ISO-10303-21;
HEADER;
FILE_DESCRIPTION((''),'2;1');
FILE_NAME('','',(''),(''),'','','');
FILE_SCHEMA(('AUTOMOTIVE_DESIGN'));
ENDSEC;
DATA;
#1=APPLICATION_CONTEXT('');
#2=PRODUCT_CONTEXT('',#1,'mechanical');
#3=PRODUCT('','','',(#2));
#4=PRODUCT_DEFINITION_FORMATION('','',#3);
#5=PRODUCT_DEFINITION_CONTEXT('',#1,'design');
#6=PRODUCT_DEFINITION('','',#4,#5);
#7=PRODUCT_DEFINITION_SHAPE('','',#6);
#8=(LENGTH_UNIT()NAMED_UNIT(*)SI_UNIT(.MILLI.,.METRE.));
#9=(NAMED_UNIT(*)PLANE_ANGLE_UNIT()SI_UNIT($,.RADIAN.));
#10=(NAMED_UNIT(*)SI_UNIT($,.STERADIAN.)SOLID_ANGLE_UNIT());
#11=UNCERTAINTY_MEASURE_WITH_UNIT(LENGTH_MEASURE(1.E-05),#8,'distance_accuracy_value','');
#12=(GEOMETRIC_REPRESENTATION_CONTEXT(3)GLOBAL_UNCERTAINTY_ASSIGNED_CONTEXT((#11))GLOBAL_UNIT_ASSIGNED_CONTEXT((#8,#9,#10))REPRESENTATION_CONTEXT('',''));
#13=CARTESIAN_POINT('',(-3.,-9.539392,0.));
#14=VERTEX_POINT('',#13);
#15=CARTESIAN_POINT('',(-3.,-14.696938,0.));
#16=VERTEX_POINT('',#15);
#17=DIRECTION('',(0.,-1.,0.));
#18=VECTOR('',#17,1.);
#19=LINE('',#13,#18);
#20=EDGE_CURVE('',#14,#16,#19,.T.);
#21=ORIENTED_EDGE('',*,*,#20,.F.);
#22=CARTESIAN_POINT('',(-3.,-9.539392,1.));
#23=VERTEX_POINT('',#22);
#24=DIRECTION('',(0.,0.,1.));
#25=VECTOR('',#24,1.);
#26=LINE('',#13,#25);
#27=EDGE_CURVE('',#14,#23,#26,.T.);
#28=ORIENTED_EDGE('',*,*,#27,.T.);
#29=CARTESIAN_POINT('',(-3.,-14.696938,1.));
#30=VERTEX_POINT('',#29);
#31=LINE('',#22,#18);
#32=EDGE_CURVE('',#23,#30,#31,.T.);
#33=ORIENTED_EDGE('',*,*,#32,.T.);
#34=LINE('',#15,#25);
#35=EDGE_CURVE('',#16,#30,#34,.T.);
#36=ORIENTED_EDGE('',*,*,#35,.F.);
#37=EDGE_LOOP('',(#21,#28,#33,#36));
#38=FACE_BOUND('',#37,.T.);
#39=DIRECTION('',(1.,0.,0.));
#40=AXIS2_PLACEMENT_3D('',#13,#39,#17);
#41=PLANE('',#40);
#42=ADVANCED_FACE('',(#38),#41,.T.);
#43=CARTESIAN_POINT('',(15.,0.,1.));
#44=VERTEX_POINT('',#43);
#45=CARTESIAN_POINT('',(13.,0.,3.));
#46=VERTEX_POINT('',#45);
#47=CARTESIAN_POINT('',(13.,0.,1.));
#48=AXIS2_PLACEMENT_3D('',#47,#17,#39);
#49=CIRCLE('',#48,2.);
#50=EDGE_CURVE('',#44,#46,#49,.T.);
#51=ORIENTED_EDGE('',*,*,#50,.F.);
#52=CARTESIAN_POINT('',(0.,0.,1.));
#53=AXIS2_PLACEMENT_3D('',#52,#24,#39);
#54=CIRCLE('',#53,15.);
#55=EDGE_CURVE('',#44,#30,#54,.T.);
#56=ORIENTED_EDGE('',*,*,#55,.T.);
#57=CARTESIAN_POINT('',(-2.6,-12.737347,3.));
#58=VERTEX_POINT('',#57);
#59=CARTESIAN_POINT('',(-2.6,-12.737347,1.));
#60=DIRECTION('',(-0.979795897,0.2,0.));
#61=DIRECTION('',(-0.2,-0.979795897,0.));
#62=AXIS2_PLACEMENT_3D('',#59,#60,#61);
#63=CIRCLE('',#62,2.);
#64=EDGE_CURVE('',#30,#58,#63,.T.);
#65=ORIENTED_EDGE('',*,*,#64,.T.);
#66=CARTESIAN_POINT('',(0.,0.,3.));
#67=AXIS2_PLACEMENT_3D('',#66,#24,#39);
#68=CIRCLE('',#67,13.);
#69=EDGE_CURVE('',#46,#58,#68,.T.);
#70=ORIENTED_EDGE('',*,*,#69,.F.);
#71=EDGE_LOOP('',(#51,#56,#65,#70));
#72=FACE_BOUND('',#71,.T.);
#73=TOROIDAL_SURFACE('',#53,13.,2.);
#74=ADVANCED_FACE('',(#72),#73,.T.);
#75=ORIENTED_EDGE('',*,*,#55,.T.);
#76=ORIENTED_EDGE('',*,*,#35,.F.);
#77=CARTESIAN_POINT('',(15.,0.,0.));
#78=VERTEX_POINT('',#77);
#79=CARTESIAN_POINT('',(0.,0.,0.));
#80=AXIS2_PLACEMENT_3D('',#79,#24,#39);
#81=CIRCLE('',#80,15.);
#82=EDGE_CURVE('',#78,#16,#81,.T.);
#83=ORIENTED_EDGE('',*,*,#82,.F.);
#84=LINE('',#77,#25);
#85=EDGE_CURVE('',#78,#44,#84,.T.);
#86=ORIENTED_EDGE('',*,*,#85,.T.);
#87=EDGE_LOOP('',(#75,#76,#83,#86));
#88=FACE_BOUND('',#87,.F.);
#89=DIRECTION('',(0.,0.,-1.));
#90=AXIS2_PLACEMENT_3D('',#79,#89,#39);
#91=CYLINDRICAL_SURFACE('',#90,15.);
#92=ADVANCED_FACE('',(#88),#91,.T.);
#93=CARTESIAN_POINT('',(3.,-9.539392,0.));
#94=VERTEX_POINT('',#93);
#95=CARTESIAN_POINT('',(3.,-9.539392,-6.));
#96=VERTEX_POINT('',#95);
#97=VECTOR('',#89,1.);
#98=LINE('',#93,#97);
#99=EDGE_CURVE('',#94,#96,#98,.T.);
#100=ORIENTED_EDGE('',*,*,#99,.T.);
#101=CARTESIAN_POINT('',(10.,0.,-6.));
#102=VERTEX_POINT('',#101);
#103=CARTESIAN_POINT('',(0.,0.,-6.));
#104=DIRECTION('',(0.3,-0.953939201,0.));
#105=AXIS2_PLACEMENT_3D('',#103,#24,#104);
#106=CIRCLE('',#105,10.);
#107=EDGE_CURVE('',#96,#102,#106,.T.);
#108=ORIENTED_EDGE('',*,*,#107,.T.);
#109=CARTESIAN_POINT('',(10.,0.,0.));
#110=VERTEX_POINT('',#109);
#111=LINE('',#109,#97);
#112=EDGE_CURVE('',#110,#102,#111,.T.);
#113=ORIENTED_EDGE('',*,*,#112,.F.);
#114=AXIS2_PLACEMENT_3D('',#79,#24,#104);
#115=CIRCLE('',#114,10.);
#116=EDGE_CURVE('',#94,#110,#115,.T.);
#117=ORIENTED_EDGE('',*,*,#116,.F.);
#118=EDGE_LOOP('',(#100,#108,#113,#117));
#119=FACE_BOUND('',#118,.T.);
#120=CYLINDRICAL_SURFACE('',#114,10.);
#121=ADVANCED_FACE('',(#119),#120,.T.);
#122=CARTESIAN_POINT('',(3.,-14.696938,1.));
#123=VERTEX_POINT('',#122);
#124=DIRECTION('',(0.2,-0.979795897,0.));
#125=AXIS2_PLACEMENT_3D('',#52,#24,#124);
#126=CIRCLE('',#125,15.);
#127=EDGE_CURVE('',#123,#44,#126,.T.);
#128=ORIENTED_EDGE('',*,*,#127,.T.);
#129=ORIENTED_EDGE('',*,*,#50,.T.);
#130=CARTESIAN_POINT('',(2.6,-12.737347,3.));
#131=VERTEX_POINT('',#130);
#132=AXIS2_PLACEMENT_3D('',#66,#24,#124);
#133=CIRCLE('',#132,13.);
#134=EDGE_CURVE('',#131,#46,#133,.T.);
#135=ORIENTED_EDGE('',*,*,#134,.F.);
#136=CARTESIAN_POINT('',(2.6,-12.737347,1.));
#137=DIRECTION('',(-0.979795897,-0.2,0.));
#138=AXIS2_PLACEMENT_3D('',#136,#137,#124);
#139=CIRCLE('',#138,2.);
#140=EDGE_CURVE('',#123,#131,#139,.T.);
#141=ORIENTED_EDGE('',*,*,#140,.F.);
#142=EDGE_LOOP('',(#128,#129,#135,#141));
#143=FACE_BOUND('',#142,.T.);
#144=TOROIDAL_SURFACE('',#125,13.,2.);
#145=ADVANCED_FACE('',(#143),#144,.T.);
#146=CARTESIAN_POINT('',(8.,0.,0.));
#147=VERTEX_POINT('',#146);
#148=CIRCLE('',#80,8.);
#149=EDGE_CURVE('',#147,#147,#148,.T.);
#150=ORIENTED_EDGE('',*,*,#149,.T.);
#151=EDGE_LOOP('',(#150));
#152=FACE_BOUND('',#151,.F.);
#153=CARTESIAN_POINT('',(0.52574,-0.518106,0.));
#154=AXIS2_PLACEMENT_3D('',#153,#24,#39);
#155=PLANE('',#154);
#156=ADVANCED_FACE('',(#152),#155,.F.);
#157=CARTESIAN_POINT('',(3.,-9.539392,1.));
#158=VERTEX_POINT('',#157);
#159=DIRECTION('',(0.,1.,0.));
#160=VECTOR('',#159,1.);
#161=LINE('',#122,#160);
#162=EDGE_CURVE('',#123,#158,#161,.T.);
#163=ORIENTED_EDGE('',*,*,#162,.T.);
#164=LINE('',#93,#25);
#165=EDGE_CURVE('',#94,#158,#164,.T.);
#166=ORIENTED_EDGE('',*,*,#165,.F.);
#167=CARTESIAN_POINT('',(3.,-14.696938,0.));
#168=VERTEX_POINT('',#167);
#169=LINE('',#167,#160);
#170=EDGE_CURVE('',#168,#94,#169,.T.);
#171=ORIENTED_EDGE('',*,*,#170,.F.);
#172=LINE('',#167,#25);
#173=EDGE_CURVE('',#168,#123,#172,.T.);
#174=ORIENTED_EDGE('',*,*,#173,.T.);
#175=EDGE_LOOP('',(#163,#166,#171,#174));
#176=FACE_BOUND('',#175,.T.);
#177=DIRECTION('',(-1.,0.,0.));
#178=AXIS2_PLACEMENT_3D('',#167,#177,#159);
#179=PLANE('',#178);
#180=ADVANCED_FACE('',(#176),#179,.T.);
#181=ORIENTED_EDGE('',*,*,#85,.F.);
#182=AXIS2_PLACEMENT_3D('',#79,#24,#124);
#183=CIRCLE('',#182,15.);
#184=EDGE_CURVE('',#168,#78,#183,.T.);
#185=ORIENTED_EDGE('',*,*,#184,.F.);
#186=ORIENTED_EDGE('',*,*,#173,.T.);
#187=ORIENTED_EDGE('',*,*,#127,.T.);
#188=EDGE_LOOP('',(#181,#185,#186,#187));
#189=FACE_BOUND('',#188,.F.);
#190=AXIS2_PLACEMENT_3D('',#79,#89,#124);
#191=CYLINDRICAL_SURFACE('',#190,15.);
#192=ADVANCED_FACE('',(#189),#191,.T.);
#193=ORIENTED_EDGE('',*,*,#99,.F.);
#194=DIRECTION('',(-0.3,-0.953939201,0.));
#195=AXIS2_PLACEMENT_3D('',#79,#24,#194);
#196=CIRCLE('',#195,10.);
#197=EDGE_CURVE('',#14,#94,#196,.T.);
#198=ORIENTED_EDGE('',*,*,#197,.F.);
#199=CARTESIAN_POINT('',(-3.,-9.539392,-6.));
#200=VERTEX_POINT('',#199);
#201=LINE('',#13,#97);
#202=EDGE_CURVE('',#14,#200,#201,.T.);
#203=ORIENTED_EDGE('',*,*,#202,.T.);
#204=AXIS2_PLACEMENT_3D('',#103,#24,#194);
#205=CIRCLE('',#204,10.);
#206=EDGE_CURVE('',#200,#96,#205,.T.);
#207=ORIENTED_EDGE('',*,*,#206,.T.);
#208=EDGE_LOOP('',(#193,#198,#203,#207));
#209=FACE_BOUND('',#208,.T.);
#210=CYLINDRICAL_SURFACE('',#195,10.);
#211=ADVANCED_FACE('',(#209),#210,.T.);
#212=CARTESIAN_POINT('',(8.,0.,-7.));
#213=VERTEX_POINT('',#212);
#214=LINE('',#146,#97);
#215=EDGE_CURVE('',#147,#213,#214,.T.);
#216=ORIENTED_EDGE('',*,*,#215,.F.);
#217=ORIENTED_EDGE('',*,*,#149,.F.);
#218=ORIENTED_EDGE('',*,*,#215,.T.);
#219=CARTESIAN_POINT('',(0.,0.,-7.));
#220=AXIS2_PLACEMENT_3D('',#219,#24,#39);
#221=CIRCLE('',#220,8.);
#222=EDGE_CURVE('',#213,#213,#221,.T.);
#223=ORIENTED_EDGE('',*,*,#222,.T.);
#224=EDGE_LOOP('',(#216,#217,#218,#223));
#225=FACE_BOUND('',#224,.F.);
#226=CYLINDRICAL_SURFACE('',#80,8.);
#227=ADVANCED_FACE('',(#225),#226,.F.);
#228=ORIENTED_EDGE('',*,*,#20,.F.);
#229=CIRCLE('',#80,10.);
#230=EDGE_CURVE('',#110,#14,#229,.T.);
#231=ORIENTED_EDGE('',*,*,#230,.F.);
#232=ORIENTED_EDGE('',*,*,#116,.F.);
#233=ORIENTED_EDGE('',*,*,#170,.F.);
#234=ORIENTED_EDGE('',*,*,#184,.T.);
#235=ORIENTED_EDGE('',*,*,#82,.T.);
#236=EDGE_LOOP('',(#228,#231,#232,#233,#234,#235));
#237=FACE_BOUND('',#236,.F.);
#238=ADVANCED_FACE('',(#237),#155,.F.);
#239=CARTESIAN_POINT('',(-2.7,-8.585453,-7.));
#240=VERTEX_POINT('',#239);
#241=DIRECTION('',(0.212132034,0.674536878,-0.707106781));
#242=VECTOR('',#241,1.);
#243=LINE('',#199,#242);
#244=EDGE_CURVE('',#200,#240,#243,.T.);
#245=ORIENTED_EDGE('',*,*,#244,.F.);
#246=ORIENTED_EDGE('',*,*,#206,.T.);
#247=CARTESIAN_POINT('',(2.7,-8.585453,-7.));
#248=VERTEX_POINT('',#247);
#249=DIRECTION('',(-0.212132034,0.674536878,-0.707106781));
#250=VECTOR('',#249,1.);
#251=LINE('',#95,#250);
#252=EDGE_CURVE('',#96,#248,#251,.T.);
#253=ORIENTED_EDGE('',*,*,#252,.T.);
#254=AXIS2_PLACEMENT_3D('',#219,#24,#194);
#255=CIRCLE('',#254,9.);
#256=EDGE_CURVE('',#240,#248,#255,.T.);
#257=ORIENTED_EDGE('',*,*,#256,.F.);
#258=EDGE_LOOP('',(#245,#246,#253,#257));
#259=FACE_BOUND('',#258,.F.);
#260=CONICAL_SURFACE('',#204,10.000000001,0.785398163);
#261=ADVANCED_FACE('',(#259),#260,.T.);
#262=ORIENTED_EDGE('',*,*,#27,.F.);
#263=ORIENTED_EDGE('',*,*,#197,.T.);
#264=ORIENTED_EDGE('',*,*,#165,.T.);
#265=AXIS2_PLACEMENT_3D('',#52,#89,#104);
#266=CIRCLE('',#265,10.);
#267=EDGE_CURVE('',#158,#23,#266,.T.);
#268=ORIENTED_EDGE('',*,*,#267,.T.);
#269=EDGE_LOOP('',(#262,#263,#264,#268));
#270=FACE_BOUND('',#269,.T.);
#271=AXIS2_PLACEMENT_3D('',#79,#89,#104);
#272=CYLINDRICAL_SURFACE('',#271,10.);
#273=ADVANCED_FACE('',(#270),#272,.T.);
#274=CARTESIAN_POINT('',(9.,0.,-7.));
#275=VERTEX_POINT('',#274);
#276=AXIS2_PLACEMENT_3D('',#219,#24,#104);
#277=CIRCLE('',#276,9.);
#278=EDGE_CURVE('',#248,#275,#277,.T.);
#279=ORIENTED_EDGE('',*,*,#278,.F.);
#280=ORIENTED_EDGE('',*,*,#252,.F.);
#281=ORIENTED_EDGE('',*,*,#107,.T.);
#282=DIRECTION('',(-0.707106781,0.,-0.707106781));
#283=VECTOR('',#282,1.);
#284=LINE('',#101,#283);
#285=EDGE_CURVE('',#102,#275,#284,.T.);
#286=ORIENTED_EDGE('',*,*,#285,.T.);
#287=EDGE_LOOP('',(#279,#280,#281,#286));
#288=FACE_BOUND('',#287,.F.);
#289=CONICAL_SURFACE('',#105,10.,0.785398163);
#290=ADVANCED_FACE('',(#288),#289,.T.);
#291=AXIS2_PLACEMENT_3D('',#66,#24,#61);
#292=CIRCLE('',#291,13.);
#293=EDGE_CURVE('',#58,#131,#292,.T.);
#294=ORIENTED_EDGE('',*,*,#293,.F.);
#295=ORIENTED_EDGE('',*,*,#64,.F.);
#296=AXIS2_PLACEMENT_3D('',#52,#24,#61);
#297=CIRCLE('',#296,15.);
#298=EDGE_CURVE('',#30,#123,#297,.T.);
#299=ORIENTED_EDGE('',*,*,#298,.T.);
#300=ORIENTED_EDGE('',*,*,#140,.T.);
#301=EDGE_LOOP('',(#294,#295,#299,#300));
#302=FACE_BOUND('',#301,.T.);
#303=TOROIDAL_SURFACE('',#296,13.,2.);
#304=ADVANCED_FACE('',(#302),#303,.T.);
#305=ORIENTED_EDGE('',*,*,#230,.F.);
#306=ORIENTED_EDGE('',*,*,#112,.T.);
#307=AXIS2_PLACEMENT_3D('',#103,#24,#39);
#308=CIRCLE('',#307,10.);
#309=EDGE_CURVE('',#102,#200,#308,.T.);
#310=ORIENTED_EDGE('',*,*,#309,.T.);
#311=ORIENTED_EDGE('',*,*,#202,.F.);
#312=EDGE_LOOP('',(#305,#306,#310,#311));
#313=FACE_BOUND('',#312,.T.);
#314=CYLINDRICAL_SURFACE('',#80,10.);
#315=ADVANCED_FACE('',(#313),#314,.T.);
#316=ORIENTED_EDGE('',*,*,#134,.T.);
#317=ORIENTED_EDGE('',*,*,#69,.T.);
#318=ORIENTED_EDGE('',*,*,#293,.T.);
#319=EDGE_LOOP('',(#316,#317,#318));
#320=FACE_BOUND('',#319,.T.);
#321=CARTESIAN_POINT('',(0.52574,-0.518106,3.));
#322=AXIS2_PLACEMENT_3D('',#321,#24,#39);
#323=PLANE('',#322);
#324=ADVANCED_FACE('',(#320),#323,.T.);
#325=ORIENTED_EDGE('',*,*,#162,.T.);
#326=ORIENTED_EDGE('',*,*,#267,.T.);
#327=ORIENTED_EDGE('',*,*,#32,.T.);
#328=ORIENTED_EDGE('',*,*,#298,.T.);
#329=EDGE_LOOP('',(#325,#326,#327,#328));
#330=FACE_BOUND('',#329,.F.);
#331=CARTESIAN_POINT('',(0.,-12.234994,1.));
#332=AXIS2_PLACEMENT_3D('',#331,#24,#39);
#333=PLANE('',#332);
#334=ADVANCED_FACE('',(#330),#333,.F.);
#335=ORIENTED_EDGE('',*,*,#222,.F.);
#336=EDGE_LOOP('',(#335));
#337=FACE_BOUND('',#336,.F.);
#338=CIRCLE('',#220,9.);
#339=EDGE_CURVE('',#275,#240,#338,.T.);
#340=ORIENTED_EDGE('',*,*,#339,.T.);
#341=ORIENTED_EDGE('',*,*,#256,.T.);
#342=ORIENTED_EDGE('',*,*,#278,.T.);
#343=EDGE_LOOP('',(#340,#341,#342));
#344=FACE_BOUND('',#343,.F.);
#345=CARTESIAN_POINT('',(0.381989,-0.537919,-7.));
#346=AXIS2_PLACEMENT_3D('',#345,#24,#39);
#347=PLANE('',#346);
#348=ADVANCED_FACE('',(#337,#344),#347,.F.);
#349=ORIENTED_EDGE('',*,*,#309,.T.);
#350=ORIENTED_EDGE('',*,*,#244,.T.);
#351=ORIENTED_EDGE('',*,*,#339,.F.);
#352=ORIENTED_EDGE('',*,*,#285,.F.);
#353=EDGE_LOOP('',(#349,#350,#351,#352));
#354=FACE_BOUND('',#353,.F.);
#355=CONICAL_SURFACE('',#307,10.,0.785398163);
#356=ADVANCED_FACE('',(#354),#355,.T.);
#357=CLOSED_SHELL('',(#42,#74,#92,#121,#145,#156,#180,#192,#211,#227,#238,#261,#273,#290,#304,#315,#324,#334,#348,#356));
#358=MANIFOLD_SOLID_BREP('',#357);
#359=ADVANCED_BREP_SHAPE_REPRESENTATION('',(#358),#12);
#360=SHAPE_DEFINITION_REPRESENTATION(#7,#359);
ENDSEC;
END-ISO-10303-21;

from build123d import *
from build123d import SkipClean  # not in build123d's __all__

# Parameters (mm, degrees)
F0_R     = 8
F1_DEPTH = 3
F2_DEPTH = 7
F3_R     = 2
F4_SIZE  = 1
F5_DEPTH = 1


with BuildPart() as f1:
    # F0 (on Top) → F1 (new body)
    with BuildSketch(Plane.XY):
        with BuildLine():
            ThreePointArc((-3, -9.5393920142), (-5.9160797831, 8.0622577483), (10, 0))
            ThreePointArc((10, 0), (8.0622577483, -5.9160797831), (3, -9.5393920142))
            Line((3, -9.5393920142), (3, -14.6969384567))
            ThreePointArc((3, -14.6969384567), (11.6189500386, -9.4868329805), (15, 0))
            ThreePointArc((15, 0), (-9.4868329805, 11.6189500386), (-3, -14.6969384567))
            Line((-3, -14.6969384567), (-3, -9.5393920142))
        make_face()
        with BuildLine():
            ThreePointArc((3, -9.5393920142), (0, -10), (-3, -9.5393920142))
            Line((-3, -9.5393920142), (-3, -14.6969384567))
            ThreePointArc((-3, -14.6969384567), (0, -15), (3, -14.6969384567))
            Line((3, -14.6969384567), (3, -9.5393920142))
        make_face()
        with BuildLine():
            ThreePointArc((3, -9.5393920142), (8.0622577483, -5.9160797831), (10, 0))
            ThreePointArc((10, 0), (-5.9160797831, 8.0622577483), (-3, -9.5393920142))
            ThreePointArc((-3, -9.5393920142), (0, -10), (3, -9.5393920142))
        make_face()
        Circle(F0_R, mode=Mode.SUBTRACT)
        Circle(F0_R)
    extrude(amount=F1_DEPTH)

    # F0 (on Top) → F2 (join)
    with BuildSketch(Plane.XY):
        with BuildLine():
            ThreePointArc((3, -9.5393920142), (8.0622577483, -5.9160797831), (10, 0))
            ThreePointArc((10, 0), (-5.9160797831, 8.0622577483), (-3, -9.5393920142))
            ThreePointArc((-3, -9.5393920142), (0, -10), (3, -9.5393920142))
        make_face()
        Circle(F0_R, mode=Mode.SUBTRACT)
    extrude(amount=-F2_DEPTH)

    # F3
    f3_edges = [f1.edges().sort_by_distance(p)[0] for p in [
        (-15, 0, 3),
    ]]
    fillet(f3_edges, radius=F3_R)

    # F4
    f4_edges = [f1.edges().sort_by_distance(p)[0] for p in [
        (3, 9.539392, -7),
    ]]
    chamfer(f4_edges, length=F4_SIZE)

    # F0 (on Top) → F5 (cut)
    with BuildSketch(Plane.XY):
        with BuildLine():
            ThreePointArc((3, -9.5393920142), (0, -10), (-3, -9.5393920142))
            Line((-3, -9.5393920142), (-3, -14.6969384567))
            ThreePointArc((-3, -14.6969384567), (0, -15), (3, -14.6969384567))
            Line((3, -14.6969384567), (3, -9.5393920142))
        make_face()
    with SkipClean():  # cleaning this boolean's faces spoils the solid; the shape is the same uncleaned
        extrude(amount=F5_DEPTH, mode=Mode.SUBTRACT)


solid = f1.part
